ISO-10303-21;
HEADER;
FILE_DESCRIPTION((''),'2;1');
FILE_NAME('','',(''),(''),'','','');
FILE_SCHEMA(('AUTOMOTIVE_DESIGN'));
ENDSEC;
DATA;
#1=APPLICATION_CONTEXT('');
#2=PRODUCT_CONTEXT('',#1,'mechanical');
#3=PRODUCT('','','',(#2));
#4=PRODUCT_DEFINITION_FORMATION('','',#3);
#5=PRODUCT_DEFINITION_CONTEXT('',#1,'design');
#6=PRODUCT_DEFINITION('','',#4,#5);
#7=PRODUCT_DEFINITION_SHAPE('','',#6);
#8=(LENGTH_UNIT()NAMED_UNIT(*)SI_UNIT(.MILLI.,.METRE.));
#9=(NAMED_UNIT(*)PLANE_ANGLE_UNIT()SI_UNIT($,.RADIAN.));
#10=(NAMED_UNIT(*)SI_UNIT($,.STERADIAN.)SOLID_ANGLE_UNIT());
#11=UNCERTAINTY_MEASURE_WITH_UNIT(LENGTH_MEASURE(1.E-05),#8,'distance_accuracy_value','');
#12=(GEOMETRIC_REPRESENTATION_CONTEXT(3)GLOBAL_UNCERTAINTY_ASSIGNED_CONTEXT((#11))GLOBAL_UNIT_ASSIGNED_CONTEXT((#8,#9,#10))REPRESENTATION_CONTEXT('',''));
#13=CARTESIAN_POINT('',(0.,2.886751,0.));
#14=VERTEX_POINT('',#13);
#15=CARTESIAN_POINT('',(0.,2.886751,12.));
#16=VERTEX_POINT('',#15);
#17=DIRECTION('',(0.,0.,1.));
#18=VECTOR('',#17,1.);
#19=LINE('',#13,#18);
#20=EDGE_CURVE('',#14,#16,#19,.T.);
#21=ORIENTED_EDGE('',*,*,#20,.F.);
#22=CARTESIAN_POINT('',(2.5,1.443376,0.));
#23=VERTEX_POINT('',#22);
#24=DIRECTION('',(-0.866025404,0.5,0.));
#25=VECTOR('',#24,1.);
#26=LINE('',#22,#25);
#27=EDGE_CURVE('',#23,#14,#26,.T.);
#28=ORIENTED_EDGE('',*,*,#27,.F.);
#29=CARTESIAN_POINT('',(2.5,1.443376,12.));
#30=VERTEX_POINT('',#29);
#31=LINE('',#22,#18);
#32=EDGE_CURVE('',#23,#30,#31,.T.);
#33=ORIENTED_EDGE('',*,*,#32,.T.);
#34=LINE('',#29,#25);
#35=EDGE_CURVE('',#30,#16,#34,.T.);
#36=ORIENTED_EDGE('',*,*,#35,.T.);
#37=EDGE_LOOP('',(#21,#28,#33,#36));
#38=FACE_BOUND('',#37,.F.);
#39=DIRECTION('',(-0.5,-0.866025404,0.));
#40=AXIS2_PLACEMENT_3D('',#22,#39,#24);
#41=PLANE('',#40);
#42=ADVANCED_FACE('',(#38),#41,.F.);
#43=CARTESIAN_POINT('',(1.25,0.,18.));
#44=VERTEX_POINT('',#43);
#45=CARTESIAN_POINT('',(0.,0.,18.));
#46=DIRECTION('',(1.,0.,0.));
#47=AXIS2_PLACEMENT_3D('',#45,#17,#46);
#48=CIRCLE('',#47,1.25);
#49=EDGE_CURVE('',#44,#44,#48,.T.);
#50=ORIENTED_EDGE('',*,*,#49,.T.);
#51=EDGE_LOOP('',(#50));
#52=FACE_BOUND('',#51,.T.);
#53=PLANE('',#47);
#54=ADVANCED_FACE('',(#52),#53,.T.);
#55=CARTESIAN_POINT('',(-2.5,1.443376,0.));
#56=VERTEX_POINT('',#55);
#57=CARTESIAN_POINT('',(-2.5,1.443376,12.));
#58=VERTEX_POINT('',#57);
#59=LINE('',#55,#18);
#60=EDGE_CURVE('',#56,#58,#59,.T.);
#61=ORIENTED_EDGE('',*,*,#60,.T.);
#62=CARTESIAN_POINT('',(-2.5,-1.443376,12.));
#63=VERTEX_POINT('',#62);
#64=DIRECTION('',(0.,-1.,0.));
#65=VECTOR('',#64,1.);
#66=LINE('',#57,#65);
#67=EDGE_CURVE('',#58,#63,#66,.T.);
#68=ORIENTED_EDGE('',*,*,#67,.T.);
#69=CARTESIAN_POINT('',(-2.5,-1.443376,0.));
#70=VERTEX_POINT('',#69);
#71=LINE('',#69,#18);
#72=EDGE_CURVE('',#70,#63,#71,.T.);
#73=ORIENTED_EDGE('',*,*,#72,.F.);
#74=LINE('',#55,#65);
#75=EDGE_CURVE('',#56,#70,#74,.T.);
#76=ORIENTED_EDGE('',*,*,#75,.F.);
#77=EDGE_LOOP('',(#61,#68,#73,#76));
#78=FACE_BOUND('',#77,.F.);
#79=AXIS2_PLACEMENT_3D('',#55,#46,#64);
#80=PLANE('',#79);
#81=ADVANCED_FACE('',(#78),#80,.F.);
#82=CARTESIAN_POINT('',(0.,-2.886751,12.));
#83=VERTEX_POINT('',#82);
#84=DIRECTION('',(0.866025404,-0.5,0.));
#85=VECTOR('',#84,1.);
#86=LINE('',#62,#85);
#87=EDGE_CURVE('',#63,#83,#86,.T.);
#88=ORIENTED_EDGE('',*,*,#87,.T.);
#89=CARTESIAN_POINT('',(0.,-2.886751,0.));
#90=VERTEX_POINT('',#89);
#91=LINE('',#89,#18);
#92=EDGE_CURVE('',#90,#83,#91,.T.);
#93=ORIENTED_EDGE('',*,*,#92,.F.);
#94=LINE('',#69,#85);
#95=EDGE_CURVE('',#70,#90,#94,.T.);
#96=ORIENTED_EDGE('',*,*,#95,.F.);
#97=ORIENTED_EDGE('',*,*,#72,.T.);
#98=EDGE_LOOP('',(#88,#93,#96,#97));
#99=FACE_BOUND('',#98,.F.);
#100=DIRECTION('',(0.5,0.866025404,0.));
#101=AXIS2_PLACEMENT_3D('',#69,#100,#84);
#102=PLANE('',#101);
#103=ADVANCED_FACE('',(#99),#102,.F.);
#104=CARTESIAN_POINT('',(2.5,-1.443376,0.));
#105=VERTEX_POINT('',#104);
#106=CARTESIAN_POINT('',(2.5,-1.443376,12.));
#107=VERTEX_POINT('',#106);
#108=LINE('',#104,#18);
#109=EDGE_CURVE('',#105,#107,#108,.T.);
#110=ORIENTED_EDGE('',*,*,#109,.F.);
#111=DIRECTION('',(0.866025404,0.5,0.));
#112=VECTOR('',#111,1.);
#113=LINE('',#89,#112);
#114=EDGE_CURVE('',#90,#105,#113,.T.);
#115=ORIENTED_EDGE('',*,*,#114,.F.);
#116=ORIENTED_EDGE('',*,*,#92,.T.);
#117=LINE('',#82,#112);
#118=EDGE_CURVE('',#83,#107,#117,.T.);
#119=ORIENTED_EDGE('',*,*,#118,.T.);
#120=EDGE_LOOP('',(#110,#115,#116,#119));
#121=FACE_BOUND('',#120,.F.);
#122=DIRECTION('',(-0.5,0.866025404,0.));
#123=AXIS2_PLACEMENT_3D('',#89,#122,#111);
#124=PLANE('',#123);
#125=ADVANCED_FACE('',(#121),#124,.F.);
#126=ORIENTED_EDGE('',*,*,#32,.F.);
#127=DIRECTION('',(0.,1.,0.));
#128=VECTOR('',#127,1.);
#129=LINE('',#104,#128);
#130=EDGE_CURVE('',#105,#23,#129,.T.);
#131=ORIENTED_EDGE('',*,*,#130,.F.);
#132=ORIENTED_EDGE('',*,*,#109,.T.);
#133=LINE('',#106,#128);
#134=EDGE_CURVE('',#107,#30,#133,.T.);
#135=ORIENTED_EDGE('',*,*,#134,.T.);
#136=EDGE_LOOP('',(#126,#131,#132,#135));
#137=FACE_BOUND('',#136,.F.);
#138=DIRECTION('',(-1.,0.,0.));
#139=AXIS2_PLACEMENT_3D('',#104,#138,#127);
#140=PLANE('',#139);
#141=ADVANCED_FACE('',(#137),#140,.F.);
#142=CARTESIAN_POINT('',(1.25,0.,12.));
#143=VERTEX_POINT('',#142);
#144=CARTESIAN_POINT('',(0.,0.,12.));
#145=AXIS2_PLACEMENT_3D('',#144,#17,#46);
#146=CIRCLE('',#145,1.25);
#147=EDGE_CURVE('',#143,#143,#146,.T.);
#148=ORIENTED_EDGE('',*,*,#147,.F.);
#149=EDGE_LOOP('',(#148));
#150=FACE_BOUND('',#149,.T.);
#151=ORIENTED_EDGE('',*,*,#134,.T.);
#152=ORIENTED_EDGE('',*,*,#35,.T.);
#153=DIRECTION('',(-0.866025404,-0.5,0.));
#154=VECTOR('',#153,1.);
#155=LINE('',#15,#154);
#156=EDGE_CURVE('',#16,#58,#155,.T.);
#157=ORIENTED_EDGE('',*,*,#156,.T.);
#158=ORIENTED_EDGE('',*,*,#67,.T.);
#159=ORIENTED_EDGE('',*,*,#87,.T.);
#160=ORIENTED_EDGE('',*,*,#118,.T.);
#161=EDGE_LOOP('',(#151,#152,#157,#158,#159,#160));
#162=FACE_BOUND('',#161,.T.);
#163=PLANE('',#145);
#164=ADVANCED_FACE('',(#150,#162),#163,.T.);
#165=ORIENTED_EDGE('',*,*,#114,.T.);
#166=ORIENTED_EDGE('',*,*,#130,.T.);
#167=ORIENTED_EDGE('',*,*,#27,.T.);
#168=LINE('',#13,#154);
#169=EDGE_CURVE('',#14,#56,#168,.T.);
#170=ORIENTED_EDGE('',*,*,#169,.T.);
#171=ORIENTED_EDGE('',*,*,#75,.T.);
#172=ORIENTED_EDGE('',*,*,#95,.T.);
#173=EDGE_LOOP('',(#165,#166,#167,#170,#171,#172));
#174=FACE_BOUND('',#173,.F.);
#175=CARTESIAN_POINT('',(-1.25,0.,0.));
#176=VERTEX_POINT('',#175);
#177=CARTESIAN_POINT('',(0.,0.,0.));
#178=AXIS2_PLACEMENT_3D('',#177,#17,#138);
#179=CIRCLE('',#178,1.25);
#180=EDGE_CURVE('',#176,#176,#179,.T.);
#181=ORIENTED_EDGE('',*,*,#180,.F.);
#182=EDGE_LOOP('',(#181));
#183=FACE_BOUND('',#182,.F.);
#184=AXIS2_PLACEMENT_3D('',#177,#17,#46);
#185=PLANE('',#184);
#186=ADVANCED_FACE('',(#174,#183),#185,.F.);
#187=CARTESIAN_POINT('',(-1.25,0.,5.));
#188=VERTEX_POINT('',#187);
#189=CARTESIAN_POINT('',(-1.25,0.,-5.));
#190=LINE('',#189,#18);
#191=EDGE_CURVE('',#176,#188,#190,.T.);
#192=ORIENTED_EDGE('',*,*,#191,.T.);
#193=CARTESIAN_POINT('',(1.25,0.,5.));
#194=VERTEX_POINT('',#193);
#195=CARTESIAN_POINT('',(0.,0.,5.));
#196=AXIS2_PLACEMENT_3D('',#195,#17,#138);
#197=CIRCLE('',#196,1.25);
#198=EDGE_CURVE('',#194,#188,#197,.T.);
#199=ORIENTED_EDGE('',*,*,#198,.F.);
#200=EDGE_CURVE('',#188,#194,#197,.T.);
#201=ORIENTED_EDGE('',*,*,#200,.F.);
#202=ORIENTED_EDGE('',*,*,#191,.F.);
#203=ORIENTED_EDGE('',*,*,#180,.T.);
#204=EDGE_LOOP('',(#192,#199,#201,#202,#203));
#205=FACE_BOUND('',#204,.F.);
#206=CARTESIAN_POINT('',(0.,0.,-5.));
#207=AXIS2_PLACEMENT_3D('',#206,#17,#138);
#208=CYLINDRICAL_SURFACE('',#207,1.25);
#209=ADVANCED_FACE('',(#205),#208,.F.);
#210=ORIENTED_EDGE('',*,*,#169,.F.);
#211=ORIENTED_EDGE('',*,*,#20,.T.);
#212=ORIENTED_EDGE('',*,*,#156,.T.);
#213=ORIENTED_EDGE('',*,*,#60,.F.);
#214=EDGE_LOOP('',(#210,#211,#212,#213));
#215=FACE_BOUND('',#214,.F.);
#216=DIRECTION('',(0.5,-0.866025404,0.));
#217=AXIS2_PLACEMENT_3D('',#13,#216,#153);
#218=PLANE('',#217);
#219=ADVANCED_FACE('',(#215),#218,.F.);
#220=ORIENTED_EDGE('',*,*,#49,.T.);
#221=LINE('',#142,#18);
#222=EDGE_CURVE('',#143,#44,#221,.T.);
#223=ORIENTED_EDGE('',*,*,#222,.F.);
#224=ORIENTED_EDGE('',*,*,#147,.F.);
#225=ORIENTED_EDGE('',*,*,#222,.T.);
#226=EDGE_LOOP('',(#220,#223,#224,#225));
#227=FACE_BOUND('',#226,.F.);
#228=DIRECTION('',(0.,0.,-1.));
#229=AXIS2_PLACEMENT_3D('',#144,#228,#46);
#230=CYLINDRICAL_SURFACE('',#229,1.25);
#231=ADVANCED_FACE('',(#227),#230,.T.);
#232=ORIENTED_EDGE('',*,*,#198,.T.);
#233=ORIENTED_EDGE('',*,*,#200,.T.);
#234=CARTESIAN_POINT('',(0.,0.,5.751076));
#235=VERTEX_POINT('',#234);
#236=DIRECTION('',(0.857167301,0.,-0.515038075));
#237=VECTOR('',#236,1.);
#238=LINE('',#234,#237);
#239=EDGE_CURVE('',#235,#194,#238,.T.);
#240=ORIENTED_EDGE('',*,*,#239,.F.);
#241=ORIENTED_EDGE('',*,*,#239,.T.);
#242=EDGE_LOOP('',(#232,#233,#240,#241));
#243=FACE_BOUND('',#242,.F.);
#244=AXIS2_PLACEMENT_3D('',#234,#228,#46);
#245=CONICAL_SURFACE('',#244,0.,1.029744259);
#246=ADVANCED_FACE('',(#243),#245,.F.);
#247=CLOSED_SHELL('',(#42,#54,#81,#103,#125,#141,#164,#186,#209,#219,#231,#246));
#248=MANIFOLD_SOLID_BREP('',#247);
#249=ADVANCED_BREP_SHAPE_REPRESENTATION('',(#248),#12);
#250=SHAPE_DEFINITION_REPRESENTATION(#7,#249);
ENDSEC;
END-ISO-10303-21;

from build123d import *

# Parameters (mm, degrees)
F1_DEPTH = 12
F2_R     = 1.25
F3_DEPTH = 6
F5_D     = 2.5
F5_DEPTH = 5
F5_TIP   = 0.7510757738


with BuildPart() as f1:
    # F0 (on Top) → F1 (new body)
    with BuildSketch(Plane.XY):
        Polygon((2.5, 1.443375673), (0, 2.8867513459), (-2.5, 1.443375673), (-2.5, -1.443375673), (0, -2.8867513459), (2.5, -1.443375673), align=None)
    extrude(amount=F1_DEPTH)

    # F2 (on face) → F3 (join)
    with BuildSketch(Plane.XY.offset(12)):
        Circle(F2_R)
    extrude(amount=F3_DEPTH)

    # F5
    with Locations(Plane(origin=(0, 0, 0), x_dir=(1, 0, 0), z_dir=(0, 0, -1))):
        with Locations((0, 0)):
            Hole(F5_D / 2, depth=F5_DEPTH)
            with Locations((0, 0, -(F5_DEPTH + F5_TIP / 2))):  # 118° drill point
                Cone(0, F5_D / 2, F5_TIP, mode=Mode.SUBTRACT)


solid = f1.part
